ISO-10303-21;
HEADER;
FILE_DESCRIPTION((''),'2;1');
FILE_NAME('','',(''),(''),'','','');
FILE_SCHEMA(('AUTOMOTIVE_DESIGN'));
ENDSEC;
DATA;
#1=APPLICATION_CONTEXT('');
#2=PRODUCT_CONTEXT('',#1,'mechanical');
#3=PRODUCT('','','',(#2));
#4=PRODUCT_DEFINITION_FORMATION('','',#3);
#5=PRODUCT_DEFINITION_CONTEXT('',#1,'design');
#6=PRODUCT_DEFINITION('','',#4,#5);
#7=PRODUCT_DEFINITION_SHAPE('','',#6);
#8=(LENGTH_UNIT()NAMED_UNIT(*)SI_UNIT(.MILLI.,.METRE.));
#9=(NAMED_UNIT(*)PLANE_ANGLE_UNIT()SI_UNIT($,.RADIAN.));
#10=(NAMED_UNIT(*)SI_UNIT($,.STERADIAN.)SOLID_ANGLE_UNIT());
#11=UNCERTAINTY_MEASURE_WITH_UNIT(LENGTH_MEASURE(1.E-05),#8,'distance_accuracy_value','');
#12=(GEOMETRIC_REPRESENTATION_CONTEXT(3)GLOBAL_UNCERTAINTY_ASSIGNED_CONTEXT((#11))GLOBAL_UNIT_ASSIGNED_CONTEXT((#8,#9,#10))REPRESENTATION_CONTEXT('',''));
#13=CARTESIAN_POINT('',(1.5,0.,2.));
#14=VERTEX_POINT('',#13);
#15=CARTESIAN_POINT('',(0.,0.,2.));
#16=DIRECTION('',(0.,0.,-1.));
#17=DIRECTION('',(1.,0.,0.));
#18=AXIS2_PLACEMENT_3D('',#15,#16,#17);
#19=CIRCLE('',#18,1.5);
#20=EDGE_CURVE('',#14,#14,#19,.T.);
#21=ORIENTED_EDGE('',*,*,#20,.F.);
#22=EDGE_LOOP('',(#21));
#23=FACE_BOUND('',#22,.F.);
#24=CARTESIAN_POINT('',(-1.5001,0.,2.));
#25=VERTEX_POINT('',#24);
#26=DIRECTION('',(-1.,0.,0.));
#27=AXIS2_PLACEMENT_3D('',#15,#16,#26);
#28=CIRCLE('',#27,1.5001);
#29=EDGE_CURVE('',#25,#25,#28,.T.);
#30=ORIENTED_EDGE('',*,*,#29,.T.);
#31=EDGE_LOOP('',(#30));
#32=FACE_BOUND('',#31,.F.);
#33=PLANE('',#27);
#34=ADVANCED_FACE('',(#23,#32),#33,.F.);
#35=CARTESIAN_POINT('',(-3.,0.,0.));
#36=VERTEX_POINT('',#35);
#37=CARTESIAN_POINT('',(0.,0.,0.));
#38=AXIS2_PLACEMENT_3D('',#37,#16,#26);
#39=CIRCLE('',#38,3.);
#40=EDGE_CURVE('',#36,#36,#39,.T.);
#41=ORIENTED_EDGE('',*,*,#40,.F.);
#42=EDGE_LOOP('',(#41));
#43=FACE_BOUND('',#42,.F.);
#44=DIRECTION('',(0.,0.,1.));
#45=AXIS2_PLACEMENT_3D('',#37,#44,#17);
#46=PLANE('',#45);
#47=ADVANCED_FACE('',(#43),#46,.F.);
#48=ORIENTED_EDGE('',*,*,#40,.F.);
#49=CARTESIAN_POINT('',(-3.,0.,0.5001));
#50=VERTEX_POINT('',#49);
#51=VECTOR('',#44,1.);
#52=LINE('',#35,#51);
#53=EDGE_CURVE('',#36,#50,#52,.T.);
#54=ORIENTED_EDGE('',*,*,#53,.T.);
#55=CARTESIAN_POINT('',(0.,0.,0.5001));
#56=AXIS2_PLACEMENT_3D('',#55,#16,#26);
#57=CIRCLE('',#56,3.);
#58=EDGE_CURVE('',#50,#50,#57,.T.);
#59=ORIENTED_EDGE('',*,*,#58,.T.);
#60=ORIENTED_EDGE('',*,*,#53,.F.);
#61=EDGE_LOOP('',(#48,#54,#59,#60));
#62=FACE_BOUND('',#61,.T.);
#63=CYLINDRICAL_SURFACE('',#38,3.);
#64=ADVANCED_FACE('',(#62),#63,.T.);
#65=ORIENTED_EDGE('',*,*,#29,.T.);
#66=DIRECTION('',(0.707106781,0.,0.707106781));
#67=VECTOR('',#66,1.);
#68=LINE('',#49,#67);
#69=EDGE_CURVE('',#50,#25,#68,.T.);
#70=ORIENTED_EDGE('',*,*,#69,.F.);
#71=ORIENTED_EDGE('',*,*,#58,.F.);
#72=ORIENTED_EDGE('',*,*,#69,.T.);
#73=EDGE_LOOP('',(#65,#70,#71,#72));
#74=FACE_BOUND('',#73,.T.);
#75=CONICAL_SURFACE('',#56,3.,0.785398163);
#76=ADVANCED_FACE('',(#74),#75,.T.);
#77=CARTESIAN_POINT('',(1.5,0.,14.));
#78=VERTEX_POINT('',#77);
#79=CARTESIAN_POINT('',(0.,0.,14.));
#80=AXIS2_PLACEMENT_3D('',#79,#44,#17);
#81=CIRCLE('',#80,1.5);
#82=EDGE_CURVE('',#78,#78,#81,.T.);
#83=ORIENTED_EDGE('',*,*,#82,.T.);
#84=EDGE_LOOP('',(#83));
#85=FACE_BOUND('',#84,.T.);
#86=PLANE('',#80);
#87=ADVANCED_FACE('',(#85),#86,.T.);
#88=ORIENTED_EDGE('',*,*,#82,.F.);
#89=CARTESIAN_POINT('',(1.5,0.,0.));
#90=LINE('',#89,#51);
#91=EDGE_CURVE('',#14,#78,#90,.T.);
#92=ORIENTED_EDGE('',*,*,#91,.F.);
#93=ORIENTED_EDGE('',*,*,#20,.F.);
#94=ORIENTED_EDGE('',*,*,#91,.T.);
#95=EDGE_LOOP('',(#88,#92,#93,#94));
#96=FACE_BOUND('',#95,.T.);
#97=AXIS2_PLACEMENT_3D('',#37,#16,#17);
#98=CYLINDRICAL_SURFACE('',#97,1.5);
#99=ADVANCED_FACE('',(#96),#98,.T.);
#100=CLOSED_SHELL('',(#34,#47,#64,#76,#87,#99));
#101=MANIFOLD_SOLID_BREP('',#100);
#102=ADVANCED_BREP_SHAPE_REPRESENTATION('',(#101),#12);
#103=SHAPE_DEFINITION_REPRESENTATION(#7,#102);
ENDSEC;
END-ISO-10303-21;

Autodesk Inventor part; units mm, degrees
ref_plane "YZ Plane" through (0, 0, 0) normal (1, 0, 0) x (0, 1, 0)
ref_plane "XZ Plane" through (0, 0, 0) normal (0, 1, 0) x (-1, 0, 0)
ref_plane "XY Plane" through (0, 0, 0) normal (0, 0, 1) x (1, 0, 0)
sketch "スケッチ1" plane through (0, 0, 0) normal (0, 0, 1) x (1, 0, 0)
  circle A0 centre (0, 0) radius 1.5
  dimension "d0" = 3
extrude "押し出し1" add sketch "スケッチ1" along normal blind 14
sketch "スケッチ2" plane through (0, 0, 0) normal (0, 0, -1) x (-1, 0, 0)
  circle A0 centre (0, 0) radius 3
  dimension "d3" = 6
extrude "押し出し2" add sketch "スケッチ2" against normal blind 2
thread "ねじ1" size "M3x0.5" class "6g" standard "ANSI Metric M Profile" full length
chamfer "面取り1" distance 1.5 angle 45 1 edges at (3, 0, 2)
properties part number "ネジ皿m3,14" material "鋼、高強度、低合金"
